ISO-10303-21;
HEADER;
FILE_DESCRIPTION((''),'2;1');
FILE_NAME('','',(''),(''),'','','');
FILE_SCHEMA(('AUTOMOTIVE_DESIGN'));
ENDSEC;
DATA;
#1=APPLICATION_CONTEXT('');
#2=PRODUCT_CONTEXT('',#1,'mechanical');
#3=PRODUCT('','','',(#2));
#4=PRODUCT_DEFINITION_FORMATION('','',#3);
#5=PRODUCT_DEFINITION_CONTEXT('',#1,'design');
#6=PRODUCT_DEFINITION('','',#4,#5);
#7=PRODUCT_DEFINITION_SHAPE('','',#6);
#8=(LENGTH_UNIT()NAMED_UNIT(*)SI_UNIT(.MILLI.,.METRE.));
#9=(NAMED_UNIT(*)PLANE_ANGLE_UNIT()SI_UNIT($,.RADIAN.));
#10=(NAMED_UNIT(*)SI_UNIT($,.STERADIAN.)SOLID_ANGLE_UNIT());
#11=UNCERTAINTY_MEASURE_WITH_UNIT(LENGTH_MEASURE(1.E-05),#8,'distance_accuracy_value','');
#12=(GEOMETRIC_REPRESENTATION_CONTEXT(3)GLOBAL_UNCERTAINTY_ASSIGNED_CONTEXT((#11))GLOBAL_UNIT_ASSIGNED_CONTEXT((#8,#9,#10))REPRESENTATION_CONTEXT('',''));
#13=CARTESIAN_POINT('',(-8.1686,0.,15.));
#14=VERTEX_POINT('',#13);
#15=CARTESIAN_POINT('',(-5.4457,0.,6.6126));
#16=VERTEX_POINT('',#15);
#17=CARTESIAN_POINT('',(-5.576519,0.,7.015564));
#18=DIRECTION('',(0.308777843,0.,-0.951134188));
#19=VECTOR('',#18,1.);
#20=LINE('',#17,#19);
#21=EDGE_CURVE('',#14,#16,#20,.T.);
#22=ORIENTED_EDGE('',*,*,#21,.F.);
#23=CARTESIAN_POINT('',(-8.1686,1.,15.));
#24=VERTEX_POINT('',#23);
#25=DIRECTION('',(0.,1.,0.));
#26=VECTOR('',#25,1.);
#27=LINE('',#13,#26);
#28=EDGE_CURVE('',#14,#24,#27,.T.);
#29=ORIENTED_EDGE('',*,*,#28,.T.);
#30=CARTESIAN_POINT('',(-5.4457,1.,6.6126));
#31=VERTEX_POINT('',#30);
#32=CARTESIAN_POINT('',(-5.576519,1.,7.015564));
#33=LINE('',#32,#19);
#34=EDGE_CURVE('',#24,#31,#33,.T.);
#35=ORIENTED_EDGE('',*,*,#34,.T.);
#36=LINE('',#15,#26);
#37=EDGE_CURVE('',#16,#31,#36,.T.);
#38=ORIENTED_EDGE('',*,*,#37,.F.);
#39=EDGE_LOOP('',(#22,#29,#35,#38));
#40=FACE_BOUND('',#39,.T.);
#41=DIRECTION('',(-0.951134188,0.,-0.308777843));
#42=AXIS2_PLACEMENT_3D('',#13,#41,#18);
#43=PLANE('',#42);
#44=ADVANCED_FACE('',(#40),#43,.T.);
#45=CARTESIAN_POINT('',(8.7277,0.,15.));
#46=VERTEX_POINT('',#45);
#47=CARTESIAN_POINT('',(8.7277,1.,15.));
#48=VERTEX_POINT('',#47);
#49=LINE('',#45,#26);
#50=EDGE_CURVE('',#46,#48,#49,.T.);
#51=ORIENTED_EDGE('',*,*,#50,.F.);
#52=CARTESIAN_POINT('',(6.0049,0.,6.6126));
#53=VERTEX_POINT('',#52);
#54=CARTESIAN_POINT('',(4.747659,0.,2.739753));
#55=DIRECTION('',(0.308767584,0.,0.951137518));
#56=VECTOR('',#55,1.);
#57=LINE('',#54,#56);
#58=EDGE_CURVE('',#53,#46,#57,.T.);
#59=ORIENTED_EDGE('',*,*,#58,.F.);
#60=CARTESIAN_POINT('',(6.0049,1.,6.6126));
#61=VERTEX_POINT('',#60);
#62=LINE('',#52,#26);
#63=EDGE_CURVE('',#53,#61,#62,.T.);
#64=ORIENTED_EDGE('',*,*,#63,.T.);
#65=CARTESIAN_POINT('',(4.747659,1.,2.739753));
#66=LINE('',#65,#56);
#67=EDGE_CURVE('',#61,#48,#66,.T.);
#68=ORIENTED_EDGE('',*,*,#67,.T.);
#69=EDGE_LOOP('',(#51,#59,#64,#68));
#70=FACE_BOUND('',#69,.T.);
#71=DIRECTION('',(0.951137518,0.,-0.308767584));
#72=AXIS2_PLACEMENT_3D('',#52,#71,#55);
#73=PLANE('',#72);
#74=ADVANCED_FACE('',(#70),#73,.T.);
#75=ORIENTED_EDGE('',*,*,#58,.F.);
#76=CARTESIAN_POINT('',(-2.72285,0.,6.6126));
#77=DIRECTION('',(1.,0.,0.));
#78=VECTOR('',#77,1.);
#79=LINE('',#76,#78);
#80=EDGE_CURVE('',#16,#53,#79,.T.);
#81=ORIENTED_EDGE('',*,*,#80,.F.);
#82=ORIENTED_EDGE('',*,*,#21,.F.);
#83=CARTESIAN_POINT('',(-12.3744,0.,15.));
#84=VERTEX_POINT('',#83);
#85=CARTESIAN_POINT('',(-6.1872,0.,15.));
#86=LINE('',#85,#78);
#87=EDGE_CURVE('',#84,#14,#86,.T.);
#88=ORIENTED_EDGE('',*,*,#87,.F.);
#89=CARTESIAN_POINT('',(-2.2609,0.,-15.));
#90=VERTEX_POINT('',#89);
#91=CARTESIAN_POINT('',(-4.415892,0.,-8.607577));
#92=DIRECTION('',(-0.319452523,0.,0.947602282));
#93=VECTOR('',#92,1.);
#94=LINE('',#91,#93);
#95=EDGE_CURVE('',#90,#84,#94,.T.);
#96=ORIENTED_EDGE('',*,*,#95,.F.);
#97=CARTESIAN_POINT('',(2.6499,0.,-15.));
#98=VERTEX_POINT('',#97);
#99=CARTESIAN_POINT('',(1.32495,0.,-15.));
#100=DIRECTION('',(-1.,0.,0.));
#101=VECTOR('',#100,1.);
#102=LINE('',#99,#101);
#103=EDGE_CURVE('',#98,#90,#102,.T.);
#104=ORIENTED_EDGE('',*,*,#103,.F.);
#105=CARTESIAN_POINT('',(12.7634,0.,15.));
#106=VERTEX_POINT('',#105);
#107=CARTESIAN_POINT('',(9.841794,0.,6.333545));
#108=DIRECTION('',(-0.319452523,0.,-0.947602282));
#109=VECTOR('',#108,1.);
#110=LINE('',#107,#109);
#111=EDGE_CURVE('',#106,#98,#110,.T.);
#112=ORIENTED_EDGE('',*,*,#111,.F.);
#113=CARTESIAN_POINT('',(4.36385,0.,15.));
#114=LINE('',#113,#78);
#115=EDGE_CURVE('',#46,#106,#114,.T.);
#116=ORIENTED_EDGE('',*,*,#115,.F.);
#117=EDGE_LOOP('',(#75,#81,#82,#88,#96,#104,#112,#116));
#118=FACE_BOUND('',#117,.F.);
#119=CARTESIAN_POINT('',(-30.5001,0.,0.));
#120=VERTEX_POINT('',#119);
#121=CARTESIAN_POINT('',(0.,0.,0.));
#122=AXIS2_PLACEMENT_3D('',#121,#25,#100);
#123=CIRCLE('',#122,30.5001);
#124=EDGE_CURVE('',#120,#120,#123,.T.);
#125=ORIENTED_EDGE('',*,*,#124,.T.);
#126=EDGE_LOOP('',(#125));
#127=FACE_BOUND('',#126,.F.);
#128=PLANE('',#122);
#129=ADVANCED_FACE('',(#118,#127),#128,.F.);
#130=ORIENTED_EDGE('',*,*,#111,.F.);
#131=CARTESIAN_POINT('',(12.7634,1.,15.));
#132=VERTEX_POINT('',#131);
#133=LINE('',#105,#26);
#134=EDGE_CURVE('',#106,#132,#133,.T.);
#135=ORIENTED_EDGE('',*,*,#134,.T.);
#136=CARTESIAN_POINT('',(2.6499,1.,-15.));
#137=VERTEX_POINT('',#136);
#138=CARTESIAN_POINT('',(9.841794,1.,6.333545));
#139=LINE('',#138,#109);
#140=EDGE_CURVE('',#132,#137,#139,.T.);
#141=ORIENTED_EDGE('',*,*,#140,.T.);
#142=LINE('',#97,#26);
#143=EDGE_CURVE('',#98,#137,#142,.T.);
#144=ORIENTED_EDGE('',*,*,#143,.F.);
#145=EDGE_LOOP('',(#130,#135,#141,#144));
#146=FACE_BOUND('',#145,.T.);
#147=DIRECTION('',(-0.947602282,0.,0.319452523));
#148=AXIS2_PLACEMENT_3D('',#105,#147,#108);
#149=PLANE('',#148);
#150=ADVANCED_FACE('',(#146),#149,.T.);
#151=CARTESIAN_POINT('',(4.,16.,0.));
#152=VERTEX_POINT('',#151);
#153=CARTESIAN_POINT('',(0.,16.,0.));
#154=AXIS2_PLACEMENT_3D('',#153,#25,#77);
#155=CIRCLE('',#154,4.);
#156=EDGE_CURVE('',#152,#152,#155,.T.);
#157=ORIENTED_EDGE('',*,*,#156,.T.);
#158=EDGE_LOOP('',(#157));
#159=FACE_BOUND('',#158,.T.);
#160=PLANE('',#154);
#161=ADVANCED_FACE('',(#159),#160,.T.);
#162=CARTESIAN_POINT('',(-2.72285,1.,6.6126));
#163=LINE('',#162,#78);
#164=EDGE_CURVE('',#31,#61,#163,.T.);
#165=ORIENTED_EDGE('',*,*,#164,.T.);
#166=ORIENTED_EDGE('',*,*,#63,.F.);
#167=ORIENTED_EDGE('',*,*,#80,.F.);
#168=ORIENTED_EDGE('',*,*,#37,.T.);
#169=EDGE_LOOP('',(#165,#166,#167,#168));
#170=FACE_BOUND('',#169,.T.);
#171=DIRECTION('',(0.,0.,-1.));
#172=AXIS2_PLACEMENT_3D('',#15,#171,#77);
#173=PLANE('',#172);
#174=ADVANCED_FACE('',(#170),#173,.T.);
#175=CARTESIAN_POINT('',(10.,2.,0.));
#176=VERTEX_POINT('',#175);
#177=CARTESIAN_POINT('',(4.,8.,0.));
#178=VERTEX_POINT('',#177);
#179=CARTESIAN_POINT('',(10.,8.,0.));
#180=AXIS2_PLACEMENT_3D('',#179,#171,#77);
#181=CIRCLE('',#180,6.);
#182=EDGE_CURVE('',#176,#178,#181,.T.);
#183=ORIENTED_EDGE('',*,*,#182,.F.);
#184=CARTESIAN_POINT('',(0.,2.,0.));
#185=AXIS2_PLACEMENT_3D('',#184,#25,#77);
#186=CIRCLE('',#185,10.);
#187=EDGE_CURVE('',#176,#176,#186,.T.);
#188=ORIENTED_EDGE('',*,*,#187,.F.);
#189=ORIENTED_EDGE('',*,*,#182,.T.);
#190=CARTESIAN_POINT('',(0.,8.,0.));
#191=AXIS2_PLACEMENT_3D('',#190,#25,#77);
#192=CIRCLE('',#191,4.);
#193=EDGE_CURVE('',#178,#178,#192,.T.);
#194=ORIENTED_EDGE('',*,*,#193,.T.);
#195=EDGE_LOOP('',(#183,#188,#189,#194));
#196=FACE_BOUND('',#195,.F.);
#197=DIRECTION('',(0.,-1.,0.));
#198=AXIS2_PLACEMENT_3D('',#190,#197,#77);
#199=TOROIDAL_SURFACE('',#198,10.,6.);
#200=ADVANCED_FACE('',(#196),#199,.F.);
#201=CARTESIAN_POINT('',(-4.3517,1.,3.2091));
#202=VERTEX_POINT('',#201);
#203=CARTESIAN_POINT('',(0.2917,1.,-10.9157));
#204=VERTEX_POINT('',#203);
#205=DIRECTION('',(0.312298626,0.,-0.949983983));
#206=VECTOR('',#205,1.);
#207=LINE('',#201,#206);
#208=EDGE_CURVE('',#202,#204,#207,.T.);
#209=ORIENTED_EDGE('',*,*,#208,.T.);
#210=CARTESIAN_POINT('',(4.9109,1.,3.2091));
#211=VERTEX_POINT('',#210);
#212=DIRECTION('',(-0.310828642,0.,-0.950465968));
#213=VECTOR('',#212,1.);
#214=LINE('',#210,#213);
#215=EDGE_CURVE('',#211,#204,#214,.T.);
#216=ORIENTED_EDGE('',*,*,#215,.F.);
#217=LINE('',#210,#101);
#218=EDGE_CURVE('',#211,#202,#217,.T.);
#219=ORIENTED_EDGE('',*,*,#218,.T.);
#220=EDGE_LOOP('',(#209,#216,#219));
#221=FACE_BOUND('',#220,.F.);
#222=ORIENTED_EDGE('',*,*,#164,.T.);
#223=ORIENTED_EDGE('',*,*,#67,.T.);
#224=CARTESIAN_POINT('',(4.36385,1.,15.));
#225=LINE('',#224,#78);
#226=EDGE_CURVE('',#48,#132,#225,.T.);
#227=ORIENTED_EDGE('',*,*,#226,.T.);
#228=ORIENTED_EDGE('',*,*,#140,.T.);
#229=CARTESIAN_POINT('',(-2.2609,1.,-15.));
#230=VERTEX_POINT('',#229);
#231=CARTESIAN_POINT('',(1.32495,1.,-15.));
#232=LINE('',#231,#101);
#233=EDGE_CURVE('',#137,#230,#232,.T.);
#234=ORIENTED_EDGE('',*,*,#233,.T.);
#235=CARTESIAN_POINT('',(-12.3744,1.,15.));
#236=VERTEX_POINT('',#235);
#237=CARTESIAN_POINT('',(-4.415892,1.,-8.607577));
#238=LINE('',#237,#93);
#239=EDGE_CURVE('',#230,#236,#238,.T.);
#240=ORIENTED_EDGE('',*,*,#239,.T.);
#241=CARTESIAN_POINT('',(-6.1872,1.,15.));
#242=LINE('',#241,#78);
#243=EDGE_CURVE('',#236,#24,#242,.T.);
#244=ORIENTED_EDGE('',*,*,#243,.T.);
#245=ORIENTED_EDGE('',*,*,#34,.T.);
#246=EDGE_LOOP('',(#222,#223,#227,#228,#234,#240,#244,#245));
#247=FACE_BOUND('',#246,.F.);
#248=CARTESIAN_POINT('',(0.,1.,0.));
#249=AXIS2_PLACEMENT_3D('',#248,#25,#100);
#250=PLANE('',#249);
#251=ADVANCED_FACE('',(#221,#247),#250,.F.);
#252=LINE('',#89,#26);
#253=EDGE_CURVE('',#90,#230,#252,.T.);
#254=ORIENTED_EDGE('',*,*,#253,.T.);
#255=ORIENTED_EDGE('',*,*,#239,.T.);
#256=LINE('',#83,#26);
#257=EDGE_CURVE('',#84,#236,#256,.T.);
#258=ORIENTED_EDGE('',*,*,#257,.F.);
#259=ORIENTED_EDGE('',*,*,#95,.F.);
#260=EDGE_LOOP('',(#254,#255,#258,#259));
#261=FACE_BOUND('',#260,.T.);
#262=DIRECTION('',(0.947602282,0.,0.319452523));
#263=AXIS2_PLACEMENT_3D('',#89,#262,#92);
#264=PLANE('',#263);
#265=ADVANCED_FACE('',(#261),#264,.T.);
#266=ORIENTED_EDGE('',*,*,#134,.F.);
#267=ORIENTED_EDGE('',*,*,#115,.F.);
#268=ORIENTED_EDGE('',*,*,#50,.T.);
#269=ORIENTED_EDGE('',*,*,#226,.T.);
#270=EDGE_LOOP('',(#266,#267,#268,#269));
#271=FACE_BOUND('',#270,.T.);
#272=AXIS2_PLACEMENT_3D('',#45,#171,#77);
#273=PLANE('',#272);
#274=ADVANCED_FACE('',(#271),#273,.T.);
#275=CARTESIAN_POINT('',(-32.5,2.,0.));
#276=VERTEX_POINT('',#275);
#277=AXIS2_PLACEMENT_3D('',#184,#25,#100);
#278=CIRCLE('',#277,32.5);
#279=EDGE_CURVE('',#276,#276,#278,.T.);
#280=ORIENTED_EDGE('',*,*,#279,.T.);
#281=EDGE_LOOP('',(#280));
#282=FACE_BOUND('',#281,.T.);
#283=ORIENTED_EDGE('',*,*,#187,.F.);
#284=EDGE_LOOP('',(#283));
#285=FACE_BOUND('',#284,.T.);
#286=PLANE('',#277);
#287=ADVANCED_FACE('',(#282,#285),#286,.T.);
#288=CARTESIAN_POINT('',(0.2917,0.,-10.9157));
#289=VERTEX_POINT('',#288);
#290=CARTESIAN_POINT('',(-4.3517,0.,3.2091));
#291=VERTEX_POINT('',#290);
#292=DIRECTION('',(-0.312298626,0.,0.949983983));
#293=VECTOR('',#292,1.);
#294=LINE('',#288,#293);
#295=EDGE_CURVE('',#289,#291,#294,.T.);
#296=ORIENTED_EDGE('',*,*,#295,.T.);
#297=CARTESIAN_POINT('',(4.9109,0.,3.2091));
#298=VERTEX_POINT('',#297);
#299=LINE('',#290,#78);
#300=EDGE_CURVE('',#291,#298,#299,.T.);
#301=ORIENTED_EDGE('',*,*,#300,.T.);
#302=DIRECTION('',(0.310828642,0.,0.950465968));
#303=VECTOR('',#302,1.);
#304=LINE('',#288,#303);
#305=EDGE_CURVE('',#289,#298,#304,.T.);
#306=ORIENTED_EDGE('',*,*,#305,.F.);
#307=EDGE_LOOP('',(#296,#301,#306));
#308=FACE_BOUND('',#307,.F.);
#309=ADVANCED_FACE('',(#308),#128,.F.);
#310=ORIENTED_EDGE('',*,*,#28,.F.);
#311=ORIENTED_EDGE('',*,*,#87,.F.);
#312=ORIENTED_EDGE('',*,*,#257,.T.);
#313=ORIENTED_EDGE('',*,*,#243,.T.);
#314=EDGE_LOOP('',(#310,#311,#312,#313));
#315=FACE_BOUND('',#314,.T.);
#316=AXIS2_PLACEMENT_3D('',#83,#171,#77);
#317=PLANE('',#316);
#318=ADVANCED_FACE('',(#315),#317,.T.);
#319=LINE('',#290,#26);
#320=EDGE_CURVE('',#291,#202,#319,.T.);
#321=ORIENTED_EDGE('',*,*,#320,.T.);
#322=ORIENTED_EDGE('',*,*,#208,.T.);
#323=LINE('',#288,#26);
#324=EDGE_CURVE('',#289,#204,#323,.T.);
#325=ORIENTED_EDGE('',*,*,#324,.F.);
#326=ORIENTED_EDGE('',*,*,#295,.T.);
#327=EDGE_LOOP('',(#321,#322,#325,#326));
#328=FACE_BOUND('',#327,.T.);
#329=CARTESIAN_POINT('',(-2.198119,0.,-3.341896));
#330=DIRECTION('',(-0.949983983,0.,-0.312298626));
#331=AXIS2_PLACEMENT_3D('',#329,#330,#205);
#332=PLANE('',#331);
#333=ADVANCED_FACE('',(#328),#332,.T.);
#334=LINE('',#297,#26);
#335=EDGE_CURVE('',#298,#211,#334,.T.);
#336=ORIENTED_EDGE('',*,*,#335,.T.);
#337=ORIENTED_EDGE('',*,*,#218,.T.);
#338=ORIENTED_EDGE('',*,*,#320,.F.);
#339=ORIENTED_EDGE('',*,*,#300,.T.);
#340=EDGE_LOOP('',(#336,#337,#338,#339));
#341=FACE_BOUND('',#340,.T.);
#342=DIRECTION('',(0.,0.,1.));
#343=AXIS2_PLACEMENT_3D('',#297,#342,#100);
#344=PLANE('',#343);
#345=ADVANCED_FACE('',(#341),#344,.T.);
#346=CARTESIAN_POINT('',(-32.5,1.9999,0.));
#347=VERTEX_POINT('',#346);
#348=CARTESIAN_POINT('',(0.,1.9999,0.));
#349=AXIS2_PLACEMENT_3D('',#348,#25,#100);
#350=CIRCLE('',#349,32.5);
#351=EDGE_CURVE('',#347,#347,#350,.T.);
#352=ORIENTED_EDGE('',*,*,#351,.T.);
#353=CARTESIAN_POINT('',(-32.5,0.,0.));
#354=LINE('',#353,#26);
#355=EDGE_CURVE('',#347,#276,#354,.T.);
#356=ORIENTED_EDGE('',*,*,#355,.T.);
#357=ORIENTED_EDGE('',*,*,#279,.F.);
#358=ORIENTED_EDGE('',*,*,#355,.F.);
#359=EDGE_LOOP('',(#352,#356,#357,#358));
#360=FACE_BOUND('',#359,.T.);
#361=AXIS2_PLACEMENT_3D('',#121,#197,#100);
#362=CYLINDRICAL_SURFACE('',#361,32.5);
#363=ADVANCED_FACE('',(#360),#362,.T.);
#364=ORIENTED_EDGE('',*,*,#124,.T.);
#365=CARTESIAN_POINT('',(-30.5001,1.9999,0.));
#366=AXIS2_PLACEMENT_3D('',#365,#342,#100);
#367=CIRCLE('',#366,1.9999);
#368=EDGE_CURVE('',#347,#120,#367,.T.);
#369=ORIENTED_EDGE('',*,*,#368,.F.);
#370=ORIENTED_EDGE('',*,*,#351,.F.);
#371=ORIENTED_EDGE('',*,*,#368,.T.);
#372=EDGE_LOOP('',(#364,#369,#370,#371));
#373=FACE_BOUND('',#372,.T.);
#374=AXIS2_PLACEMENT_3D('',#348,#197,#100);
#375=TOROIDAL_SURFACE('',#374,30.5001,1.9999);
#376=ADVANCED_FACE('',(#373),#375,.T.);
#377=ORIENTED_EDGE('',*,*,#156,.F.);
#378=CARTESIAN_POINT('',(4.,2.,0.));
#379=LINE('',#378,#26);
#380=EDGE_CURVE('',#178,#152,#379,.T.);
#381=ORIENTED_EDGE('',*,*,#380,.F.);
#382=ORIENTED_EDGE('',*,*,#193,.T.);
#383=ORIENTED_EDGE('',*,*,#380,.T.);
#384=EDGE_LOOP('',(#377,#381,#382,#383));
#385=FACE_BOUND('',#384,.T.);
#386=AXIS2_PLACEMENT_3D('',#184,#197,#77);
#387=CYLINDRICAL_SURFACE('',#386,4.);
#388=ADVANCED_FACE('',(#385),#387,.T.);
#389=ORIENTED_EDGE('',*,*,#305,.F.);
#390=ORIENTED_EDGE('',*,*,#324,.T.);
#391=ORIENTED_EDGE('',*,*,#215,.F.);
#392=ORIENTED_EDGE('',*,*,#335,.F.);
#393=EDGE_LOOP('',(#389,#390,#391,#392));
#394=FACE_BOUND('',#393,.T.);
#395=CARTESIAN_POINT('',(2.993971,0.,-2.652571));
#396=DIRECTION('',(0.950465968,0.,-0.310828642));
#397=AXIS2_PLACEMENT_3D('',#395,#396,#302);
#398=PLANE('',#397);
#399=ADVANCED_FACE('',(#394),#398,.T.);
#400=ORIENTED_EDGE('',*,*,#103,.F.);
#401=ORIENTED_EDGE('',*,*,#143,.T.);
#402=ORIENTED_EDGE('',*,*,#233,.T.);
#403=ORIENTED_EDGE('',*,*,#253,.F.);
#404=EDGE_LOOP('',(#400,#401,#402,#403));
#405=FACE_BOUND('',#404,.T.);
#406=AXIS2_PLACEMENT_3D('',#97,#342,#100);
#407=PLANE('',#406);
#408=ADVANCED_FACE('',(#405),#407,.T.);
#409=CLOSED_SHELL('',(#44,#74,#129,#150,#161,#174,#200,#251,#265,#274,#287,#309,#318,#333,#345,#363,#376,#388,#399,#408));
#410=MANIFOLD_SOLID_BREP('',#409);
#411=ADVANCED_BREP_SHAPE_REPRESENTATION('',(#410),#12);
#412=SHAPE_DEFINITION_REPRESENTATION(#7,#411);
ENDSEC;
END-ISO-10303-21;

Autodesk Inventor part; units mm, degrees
ref_plane "YZ Plane" through (0, 0, 0) normal (1, 0, 0) x (0, 1, 0)
ref_plane "XZ Plane" through (0, 0, 0) normal (0, 1, 0) x (-1, 0, 0)
ref_plane "XY Plane" through (0, 0, 0) normal (0, 0, 1) x (1, 0, 0)
sketch "Sketch1" plane through (0, 0, 0) normal (0, 1, 0) x (-1, 0, 0)
  circle A0 centre (0, 0) radius 32.5
  dimension "d0" = 65
extrude "Extrusion3" add sketch "Sketch1" along normal blind 2
sketch "Sketch3" plane through (0, 2, 0) normal (0, 1, 0) x (1, 0, 0)
  circle A0 centre (0, 0) radius 4
  dimension "d17" = 8
extrude "Extrusion4" add sketch "Sketch3" along normal blind 14
fillet "Fillet2" radius 6 1 edges at (-4, 2, 0)
fillet "Fillet3" radius 2 1 edges at (32.5, 0, 0)
sketch "Sketch4" plane through (0, 0, 0) normal (0, -1, 0) x (1, 0, 0)
  line L0 (32.5, -32.5) -> (-32.5, -32.5) construction
  line L1 (-32.5, -32.5) -> (-32.5, 32.5) construction
  line L2 (-32.5, 32.5) -> (32.5, 32.5) construction
  line L3 (32.5, 32.5) -> (32.5, -32.5) construction
  line L4 (32.5, 32.5) -> (-32.5, 32.5)
  line L5 (-32.5, 32.5) -> (-32.5, -32.5)
  line L6 (-32.5, -32.5) -> (32.5, -32.5)
  line L7 (32.5, -32.5) -> (32.5, 32.5)
  circle A0 centre (0, 0) radius 4 projected
  line L8 (32.5, 32.5) -> (-32.5, -32.5) construction
  line L9 (-32.5, 32.5) -> (32.5, -32.5) construction
  line L10 (12.7634, 15) -> (2.6499, -15)
  line L11 (2.6499, -15) -> (-2.2609, -15)
  line L12 (-2.2609, -15) -> (-12.3744, 15)
  line L13 (-12.3744, 15) -> (-8.1686, 15)
  line L14 (-8.1686, 15) -> (-5.4457, 6.6126)
  line L15 (-5.4457, 6.6126) -> (6.0049, 6.6126)
  line L16 (6.0049, 6.6126) -> (8.7277, 15)
  line L17 (8.7277, 15) -> (12.7634, 15)
  line L18 (-4.3517, 3.2091) -> (0.2917, -10.9157)
  line L19 (0.2917, -10.9157) -> (4.9109, 3.2091)
  line L20 (4.9109, 3.2091) -> (-4.3517, 3.2091)
  dimension "d22" = 65
  dimension "d23" = 65
  dimension "d24" = 65
  dimension "d25" = 65
  dimension "d26" = 0
  dimension "d27" = 0
emboss "Emboss2" sketch "Sketch4" operation cut depth 1 direction (0, 1, 0) contours A0 L19 | L20 A0 | A0 L18 | L10 L11 L12 L13 L14 L15 L16 L17
properties part number "Stepper_Closing_1"
